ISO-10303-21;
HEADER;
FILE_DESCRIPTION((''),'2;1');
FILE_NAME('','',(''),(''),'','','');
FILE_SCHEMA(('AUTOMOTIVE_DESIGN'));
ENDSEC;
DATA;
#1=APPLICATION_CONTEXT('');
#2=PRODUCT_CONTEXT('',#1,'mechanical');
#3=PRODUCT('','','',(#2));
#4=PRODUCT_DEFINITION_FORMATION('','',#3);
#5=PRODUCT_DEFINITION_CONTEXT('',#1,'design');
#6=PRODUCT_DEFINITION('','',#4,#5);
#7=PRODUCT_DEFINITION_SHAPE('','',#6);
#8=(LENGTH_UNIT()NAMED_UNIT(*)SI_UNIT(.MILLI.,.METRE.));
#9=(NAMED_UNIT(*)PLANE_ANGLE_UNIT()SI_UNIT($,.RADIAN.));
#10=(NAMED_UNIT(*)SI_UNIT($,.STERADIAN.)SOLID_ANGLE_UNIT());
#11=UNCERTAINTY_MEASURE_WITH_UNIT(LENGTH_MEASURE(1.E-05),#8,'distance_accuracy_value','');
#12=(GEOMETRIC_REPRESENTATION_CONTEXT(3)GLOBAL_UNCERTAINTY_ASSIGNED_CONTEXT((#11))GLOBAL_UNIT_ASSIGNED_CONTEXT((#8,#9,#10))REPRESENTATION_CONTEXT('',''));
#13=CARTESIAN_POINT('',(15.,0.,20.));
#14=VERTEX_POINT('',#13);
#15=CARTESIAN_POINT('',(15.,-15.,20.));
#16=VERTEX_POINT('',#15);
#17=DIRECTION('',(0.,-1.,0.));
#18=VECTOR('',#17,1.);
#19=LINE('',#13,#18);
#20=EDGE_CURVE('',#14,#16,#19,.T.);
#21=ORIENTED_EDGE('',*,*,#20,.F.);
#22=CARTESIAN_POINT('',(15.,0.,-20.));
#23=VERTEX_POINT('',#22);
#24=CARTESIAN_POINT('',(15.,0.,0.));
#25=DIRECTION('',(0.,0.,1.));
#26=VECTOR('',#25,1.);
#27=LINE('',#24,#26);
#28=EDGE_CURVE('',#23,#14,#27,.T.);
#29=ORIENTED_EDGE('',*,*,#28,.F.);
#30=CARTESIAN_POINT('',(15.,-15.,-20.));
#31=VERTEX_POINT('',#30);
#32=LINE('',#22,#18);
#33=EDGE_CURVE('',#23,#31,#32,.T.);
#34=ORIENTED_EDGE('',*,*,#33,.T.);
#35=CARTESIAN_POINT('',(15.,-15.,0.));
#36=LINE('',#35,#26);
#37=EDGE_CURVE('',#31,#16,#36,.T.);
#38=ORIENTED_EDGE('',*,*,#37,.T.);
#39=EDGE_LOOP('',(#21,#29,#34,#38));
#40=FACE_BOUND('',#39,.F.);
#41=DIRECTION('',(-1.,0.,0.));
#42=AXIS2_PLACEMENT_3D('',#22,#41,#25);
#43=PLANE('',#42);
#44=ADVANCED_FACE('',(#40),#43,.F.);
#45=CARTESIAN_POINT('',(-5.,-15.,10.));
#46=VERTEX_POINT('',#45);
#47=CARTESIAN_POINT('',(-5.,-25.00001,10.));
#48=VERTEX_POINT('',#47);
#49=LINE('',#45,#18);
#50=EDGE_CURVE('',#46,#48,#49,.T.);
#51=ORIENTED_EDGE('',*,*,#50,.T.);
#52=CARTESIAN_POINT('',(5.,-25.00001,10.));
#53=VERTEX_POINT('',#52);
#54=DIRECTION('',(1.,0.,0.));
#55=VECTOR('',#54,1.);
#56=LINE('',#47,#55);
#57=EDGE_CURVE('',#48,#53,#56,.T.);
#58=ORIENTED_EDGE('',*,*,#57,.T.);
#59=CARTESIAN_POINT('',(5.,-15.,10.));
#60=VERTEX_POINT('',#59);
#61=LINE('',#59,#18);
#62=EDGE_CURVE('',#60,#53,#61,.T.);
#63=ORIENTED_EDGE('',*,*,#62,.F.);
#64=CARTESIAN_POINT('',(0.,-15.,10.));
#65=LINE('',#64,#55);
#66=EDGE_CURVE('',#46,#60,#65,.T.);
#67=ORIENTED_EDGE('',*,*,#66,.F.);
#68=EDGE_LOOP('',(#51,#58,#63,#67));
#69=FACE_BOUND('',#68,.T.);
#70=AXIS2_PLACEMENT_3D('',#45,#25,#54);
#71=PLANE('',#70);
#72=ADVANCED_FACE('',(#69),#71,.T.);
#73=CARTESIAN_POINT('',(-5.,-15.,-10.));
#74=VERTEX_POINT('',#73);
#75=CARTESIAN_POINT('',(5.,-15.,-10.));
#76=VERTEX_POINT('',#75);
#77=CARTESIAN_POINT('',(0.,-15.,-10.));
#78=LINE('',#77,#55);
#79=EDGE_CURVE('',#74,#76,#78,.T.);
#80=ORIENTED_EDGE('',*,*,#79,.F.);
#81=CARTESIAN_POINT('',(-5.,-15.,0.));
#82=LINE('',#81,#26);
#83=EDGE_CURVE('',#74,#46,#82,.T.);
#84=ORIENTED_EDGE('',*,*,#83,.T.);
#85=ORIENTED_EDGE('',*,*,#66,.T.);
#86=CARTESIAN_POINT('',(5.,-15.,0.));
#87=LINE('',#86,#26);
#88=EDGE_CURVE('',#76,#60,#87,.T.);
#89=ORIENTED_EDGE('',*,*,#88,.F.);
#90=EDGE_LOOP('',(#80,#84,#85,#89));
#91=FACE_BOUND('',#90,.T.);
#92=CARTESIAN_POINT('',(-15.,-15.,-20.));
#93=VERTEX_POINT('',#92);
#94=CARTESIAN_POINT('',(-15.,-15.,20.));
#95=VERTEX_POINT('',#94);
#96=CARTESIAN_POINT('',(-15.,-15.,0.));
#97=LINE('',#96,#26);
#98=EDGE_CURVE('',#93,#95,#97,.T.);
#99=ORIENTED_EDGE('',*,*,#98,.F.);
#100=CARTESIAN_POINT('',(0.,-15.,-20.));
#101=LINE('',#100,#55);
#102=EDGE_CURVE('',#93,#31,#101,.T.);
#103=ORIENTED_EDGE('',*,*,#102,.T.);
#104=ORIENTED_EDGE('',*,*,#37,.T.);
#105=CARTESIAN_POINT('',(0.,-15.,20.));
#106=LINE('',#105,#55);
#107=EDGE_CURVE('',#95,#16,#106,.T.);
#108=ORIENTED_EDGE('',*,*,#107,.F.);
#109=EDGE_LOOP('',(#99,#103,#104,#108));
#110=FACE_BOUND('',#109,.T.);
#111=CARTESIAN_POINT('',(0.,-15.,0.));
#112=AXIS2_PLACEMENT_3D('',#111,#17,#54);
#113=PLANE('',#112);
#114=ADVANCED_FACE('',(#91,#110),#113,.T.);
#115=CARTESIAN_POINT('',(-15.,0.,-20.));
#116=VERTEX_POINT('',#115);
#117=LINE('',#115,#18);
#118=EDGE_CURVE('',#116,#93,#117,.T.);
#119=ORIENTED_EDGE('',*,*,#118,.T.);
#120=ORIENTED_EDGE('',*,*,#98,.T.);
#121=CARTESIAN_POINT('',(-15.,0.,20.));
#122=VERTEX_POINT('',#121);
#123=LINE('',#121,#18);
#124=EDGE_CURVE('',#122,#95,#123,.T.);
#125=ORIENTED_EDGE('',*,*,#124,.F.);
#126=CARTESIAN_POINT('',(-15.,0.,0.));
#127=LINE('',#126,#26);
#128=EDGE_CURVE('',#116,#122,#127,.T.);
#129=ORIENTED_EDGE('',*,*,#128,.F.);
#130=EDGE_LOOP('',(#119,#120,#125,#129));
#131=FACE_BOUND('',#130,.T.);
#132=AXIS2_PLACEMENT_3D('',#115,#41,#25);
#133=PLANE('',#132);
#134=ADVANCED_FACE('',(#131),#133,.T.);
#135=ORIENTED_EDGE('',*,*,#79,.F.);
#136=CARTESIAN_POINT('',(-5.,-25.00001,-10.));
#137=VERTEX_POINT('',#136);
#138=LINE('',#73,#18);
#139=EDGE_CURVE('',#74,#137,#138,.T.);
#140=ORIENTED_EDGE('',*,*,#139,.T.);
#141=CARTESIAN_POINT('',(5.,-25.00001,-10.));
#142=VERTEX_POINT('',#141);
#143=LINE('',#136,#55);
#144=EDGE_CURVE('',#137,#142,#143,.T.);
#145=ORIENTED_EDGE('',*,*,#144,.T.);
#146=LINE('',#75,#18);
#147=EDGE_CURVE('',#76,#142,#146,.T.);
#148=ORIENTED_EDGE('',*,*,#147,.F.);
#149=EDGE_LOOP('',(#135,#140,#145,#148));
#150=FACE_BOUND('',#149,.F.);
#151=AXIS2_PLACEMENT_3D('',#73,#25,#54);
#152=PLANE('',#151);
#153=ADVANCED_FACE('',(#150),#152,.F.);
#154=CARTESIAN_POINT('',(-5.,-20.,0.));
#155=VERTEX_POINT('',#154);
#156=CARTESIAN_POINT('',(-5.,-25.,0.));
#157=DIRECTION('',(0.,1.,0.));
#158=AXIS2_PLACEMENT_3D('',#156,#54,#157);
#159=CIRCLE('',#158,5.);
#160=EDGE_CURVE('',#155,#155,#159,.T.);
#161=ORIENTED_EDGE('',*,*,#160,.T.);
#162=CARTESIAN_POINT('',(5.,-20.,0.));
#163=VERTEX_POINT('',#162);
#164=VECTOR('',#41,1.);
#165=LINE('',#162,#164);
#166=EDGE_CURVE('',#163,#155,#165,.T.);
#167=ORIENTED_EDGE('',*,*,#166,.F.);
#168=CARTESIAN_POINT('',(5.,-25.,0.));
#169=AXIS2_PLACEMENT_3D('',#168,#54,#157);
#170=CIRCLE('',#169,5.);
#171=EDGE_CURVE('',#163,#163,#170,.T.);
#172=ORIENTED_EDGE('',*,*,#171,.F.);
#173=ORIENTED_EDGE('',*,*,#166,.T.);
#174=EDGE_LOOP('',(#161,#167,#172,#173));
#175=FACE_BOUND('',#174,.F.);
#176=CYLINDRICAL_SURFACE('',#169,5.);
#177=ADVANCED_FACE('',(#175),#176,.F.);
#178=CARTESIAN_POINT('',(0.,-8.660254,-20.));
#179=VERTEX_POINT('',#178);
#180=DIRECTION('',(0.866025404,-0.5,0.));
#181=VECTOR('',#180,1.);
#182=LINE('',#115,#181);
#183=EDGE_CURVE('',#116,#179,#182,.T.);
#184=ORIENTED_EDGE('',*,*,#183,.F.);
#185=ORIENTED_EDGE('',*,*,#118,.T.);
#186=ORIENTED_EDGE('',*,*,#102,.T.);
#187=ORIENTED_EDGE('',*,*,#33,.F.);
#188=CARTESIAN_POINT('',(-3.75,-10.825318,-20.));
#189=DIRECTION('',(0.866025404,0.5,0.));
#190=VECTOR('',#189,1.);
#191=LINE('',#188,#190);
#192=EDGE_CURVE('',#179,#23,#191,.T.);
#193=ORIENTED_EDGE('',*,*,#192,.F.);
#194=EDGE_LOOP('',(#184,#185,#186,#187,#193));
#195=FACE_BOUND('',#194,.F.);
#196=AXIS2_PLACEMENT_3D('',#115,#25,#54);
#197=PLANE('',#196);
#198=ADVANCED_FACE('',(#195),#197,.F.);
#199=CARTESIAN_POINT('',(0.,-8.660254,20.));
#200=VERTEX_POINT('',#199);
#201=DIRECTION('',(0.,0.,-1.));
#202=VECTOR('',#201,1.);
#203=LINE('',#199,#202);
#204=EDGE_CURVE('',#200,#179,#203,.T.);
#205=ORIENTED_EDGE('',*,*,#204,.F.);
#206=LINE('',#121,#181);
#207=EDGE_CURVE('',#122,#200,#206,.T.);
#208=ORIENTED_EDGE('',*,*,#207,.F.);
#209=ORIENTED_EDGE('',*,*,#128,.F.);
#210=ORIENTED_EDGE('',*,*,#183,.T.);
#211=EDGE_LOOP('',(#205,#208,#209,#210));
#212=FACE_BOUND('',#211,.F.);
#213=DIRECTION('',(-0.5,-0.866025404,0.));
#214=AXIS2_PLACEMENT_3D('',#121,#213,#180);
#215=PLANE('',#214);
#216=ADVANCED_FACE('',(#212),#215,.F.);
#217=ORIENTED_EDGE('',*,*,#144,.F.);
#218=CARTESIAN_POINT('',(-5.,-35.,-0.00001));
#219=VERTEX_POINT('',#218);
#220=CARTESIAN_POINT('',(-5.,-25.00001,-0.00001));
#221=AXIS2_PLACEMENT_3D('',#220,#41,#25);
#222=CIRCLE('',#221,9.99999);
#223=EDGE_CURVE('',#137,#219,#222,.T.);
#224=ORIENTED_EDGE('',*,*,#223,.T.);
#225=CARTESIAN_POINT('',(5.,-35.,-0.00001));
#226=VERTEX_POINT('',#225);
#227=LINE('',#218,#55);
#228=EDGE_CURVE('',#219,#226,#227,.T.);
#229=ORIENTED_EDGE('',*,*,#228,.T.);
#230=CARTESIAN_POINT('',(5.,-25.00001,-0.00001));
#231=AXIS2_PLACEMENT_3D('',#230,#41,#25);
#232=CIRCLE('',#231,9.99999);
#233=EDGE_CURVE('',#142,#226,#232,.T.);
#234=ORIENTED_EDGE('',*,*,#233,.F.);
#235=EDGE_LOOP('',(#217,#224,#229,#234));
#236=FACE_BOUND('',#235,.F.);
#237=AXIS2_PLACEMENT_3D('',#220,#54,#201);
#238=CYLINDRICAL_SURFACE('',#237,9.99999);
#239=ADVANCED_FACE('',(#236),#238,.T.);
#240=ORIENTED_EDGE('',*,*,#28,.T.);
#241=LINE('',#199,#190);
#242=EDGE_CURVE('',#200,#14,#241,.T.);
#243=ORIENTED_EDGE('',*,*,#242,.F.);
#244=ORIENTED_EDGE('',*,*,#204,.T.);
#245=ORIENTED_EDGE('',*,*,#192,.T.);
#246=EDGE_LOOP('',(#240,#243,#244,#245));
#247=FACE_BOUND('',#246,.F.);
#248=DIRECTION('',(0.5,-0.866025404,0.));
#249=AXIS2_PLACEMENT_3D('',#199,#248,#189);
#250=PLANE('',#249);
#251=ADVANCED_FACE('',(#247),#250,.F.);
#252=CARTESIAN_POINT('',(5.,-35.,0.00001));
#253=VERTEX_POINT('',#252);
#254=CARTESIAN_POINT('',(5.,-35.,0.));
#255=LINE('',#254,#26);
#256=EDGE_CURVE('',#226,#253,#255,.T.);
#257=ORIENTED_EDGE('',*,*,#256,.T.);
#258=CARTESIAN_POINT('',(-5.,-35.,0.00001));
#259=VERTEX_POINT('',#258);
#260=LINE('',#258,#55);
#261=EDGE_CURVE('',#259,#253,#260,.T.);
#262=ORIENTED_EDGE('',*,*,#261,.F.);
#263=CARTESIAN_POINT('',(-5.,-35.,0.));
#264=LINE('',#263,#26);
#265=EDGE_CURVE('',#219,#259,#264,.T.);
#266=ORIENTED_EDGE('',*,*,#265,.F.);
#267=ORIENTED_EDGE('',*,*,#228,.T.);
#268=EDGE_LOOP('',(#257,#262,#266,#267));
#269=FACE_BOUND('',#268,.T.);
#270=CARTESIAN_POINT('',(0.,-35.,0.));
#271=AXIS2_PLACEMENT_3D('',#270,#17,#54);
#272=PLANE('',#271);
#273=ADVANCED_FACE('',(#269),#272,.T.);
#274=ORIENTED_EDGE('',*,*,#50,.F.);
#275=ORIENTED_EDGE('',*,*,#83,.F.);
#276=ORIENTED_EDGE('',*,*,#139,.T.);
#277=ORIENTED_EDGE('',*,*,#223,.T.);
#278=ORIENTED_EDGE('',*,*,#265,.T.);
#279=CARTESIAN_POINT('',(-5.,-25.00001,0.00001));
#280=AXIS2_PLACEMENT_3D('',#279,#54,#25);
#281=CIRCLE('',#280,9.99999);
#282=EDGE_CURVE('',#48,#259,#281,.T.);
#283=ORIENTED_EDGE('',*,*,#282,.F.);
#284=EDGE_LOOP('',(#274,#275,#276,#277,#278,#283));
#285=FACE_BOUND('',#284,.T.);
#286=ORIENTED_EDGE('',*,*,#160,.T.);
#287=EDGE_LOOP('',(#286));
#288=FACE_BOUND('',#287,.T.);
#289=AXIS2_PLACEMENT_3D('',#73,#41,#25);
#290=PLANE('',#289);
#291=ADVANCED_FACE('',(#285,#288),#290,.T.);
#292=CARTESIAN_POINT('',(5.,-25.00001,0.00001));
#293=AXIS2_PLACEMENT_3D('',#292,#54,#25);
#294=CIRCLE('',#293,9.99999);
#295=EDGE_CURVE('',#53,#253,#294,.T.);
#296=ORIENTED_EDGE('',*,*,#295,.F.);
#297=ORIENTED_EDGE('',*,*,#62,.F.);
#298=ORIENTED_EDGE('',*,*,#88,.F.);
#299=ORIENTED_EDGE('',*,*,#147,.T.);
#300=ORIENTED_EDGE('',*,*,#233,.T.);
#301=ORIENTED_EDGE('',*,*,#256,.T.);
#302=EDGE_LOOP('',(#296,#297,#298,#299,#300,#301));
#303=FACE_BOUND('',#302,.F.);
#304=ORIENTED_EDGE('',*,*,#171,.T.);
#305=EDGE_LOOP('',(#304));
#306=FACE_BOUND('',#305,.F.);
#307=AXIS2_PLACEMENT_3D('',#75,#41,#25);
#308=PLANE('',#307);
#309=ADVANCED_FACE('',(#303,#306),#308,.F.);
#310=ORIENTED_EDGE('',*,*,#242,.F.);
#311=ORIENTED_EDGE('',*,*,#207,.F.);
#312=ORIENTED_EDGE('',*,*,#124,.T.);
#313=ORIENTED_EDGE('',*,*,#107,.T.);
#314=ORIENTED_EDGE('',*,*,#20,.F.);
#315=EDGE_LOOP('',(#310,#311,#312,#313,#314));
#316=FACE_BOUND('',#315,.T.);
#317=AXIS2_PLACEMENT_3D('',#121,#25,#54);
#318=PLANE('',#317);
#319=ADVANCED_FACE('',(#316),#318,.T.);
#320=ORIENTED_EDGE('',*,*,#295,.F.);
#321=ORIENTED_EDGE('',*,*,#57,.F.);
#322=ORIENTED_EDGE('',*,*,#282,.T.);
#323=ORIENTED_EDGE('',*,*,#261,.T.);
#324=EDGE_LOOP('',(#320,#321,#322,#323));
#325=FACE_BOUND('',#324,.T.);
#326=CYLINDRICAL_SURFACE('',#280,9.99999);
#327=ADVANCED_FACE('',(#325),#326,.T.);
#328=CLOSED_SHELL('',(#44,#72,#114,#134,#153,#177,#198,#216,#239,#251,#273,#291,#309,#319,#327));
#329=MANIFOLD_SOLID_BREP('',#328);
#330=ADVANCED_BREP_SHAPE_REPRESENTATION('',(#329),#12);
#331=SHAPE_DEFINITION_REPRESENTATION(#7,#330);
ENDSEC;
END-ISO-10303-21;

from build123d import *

# Parameters (mm, degrees)
F0_W     = 30
F0_H     = 40
F1_DEPTH = 15
F2_W     = 10
F2_H     = 20
F3_DEPTH = 20
F4_R     = 5
F5_DEPTH = 20.001
F6_R     = 9.99999
F8_DEPTH = 40.001


# Not quite as in the source:
# - a fillet or chamfer is up to 0.001 mm smaller than in the source, because OpenCascade refuses the exact size


with BuildPart() as f1:
    # F0 (on Front) → F1 (new body)
    with BuildSketch(Plane.XZ):
        Rectangle(F0_W, F0_H)
    extrude(amount=F1_DEPTH)

    # F2 (on face) → F3 (join)
    with BuildSketch(Plane.XZ.offset(15)):
        Rectangle(F2_W, F2_H)
    extrude(amount=F3_DEPTH)

    # F4 (on face) → F5 (cut, through all)
    with BuildSketch(Plane.YZ.offset(5)):
        with Locations((-25, 0)):
            Circle(F4_R)
    extrude(amount=-F5_DEPTH, mode=Mode.SUBTRACT)

    # F6 (radius 10 in the source; OpenCascade refuses exactly that, so slightly less here)
    f6_edges = [f1.edges().sort_by_distance(p)[0] for p in [
        (0, -35, 10),
        (0, -35, -10),
    ]]
    fillet(f6_edges, radius=F6_R)

    # F7 (on face) → F8 (cut, through all)
    with BuildSketch(Plane.XY.offset(20)):
        Polygon((15, 0), (-15, 0), (0, -8.6602540378), align=None)
    extrude(amount=-F8_DEPTH, mode=Mode.SUBTRACT)


solid = f1.part
